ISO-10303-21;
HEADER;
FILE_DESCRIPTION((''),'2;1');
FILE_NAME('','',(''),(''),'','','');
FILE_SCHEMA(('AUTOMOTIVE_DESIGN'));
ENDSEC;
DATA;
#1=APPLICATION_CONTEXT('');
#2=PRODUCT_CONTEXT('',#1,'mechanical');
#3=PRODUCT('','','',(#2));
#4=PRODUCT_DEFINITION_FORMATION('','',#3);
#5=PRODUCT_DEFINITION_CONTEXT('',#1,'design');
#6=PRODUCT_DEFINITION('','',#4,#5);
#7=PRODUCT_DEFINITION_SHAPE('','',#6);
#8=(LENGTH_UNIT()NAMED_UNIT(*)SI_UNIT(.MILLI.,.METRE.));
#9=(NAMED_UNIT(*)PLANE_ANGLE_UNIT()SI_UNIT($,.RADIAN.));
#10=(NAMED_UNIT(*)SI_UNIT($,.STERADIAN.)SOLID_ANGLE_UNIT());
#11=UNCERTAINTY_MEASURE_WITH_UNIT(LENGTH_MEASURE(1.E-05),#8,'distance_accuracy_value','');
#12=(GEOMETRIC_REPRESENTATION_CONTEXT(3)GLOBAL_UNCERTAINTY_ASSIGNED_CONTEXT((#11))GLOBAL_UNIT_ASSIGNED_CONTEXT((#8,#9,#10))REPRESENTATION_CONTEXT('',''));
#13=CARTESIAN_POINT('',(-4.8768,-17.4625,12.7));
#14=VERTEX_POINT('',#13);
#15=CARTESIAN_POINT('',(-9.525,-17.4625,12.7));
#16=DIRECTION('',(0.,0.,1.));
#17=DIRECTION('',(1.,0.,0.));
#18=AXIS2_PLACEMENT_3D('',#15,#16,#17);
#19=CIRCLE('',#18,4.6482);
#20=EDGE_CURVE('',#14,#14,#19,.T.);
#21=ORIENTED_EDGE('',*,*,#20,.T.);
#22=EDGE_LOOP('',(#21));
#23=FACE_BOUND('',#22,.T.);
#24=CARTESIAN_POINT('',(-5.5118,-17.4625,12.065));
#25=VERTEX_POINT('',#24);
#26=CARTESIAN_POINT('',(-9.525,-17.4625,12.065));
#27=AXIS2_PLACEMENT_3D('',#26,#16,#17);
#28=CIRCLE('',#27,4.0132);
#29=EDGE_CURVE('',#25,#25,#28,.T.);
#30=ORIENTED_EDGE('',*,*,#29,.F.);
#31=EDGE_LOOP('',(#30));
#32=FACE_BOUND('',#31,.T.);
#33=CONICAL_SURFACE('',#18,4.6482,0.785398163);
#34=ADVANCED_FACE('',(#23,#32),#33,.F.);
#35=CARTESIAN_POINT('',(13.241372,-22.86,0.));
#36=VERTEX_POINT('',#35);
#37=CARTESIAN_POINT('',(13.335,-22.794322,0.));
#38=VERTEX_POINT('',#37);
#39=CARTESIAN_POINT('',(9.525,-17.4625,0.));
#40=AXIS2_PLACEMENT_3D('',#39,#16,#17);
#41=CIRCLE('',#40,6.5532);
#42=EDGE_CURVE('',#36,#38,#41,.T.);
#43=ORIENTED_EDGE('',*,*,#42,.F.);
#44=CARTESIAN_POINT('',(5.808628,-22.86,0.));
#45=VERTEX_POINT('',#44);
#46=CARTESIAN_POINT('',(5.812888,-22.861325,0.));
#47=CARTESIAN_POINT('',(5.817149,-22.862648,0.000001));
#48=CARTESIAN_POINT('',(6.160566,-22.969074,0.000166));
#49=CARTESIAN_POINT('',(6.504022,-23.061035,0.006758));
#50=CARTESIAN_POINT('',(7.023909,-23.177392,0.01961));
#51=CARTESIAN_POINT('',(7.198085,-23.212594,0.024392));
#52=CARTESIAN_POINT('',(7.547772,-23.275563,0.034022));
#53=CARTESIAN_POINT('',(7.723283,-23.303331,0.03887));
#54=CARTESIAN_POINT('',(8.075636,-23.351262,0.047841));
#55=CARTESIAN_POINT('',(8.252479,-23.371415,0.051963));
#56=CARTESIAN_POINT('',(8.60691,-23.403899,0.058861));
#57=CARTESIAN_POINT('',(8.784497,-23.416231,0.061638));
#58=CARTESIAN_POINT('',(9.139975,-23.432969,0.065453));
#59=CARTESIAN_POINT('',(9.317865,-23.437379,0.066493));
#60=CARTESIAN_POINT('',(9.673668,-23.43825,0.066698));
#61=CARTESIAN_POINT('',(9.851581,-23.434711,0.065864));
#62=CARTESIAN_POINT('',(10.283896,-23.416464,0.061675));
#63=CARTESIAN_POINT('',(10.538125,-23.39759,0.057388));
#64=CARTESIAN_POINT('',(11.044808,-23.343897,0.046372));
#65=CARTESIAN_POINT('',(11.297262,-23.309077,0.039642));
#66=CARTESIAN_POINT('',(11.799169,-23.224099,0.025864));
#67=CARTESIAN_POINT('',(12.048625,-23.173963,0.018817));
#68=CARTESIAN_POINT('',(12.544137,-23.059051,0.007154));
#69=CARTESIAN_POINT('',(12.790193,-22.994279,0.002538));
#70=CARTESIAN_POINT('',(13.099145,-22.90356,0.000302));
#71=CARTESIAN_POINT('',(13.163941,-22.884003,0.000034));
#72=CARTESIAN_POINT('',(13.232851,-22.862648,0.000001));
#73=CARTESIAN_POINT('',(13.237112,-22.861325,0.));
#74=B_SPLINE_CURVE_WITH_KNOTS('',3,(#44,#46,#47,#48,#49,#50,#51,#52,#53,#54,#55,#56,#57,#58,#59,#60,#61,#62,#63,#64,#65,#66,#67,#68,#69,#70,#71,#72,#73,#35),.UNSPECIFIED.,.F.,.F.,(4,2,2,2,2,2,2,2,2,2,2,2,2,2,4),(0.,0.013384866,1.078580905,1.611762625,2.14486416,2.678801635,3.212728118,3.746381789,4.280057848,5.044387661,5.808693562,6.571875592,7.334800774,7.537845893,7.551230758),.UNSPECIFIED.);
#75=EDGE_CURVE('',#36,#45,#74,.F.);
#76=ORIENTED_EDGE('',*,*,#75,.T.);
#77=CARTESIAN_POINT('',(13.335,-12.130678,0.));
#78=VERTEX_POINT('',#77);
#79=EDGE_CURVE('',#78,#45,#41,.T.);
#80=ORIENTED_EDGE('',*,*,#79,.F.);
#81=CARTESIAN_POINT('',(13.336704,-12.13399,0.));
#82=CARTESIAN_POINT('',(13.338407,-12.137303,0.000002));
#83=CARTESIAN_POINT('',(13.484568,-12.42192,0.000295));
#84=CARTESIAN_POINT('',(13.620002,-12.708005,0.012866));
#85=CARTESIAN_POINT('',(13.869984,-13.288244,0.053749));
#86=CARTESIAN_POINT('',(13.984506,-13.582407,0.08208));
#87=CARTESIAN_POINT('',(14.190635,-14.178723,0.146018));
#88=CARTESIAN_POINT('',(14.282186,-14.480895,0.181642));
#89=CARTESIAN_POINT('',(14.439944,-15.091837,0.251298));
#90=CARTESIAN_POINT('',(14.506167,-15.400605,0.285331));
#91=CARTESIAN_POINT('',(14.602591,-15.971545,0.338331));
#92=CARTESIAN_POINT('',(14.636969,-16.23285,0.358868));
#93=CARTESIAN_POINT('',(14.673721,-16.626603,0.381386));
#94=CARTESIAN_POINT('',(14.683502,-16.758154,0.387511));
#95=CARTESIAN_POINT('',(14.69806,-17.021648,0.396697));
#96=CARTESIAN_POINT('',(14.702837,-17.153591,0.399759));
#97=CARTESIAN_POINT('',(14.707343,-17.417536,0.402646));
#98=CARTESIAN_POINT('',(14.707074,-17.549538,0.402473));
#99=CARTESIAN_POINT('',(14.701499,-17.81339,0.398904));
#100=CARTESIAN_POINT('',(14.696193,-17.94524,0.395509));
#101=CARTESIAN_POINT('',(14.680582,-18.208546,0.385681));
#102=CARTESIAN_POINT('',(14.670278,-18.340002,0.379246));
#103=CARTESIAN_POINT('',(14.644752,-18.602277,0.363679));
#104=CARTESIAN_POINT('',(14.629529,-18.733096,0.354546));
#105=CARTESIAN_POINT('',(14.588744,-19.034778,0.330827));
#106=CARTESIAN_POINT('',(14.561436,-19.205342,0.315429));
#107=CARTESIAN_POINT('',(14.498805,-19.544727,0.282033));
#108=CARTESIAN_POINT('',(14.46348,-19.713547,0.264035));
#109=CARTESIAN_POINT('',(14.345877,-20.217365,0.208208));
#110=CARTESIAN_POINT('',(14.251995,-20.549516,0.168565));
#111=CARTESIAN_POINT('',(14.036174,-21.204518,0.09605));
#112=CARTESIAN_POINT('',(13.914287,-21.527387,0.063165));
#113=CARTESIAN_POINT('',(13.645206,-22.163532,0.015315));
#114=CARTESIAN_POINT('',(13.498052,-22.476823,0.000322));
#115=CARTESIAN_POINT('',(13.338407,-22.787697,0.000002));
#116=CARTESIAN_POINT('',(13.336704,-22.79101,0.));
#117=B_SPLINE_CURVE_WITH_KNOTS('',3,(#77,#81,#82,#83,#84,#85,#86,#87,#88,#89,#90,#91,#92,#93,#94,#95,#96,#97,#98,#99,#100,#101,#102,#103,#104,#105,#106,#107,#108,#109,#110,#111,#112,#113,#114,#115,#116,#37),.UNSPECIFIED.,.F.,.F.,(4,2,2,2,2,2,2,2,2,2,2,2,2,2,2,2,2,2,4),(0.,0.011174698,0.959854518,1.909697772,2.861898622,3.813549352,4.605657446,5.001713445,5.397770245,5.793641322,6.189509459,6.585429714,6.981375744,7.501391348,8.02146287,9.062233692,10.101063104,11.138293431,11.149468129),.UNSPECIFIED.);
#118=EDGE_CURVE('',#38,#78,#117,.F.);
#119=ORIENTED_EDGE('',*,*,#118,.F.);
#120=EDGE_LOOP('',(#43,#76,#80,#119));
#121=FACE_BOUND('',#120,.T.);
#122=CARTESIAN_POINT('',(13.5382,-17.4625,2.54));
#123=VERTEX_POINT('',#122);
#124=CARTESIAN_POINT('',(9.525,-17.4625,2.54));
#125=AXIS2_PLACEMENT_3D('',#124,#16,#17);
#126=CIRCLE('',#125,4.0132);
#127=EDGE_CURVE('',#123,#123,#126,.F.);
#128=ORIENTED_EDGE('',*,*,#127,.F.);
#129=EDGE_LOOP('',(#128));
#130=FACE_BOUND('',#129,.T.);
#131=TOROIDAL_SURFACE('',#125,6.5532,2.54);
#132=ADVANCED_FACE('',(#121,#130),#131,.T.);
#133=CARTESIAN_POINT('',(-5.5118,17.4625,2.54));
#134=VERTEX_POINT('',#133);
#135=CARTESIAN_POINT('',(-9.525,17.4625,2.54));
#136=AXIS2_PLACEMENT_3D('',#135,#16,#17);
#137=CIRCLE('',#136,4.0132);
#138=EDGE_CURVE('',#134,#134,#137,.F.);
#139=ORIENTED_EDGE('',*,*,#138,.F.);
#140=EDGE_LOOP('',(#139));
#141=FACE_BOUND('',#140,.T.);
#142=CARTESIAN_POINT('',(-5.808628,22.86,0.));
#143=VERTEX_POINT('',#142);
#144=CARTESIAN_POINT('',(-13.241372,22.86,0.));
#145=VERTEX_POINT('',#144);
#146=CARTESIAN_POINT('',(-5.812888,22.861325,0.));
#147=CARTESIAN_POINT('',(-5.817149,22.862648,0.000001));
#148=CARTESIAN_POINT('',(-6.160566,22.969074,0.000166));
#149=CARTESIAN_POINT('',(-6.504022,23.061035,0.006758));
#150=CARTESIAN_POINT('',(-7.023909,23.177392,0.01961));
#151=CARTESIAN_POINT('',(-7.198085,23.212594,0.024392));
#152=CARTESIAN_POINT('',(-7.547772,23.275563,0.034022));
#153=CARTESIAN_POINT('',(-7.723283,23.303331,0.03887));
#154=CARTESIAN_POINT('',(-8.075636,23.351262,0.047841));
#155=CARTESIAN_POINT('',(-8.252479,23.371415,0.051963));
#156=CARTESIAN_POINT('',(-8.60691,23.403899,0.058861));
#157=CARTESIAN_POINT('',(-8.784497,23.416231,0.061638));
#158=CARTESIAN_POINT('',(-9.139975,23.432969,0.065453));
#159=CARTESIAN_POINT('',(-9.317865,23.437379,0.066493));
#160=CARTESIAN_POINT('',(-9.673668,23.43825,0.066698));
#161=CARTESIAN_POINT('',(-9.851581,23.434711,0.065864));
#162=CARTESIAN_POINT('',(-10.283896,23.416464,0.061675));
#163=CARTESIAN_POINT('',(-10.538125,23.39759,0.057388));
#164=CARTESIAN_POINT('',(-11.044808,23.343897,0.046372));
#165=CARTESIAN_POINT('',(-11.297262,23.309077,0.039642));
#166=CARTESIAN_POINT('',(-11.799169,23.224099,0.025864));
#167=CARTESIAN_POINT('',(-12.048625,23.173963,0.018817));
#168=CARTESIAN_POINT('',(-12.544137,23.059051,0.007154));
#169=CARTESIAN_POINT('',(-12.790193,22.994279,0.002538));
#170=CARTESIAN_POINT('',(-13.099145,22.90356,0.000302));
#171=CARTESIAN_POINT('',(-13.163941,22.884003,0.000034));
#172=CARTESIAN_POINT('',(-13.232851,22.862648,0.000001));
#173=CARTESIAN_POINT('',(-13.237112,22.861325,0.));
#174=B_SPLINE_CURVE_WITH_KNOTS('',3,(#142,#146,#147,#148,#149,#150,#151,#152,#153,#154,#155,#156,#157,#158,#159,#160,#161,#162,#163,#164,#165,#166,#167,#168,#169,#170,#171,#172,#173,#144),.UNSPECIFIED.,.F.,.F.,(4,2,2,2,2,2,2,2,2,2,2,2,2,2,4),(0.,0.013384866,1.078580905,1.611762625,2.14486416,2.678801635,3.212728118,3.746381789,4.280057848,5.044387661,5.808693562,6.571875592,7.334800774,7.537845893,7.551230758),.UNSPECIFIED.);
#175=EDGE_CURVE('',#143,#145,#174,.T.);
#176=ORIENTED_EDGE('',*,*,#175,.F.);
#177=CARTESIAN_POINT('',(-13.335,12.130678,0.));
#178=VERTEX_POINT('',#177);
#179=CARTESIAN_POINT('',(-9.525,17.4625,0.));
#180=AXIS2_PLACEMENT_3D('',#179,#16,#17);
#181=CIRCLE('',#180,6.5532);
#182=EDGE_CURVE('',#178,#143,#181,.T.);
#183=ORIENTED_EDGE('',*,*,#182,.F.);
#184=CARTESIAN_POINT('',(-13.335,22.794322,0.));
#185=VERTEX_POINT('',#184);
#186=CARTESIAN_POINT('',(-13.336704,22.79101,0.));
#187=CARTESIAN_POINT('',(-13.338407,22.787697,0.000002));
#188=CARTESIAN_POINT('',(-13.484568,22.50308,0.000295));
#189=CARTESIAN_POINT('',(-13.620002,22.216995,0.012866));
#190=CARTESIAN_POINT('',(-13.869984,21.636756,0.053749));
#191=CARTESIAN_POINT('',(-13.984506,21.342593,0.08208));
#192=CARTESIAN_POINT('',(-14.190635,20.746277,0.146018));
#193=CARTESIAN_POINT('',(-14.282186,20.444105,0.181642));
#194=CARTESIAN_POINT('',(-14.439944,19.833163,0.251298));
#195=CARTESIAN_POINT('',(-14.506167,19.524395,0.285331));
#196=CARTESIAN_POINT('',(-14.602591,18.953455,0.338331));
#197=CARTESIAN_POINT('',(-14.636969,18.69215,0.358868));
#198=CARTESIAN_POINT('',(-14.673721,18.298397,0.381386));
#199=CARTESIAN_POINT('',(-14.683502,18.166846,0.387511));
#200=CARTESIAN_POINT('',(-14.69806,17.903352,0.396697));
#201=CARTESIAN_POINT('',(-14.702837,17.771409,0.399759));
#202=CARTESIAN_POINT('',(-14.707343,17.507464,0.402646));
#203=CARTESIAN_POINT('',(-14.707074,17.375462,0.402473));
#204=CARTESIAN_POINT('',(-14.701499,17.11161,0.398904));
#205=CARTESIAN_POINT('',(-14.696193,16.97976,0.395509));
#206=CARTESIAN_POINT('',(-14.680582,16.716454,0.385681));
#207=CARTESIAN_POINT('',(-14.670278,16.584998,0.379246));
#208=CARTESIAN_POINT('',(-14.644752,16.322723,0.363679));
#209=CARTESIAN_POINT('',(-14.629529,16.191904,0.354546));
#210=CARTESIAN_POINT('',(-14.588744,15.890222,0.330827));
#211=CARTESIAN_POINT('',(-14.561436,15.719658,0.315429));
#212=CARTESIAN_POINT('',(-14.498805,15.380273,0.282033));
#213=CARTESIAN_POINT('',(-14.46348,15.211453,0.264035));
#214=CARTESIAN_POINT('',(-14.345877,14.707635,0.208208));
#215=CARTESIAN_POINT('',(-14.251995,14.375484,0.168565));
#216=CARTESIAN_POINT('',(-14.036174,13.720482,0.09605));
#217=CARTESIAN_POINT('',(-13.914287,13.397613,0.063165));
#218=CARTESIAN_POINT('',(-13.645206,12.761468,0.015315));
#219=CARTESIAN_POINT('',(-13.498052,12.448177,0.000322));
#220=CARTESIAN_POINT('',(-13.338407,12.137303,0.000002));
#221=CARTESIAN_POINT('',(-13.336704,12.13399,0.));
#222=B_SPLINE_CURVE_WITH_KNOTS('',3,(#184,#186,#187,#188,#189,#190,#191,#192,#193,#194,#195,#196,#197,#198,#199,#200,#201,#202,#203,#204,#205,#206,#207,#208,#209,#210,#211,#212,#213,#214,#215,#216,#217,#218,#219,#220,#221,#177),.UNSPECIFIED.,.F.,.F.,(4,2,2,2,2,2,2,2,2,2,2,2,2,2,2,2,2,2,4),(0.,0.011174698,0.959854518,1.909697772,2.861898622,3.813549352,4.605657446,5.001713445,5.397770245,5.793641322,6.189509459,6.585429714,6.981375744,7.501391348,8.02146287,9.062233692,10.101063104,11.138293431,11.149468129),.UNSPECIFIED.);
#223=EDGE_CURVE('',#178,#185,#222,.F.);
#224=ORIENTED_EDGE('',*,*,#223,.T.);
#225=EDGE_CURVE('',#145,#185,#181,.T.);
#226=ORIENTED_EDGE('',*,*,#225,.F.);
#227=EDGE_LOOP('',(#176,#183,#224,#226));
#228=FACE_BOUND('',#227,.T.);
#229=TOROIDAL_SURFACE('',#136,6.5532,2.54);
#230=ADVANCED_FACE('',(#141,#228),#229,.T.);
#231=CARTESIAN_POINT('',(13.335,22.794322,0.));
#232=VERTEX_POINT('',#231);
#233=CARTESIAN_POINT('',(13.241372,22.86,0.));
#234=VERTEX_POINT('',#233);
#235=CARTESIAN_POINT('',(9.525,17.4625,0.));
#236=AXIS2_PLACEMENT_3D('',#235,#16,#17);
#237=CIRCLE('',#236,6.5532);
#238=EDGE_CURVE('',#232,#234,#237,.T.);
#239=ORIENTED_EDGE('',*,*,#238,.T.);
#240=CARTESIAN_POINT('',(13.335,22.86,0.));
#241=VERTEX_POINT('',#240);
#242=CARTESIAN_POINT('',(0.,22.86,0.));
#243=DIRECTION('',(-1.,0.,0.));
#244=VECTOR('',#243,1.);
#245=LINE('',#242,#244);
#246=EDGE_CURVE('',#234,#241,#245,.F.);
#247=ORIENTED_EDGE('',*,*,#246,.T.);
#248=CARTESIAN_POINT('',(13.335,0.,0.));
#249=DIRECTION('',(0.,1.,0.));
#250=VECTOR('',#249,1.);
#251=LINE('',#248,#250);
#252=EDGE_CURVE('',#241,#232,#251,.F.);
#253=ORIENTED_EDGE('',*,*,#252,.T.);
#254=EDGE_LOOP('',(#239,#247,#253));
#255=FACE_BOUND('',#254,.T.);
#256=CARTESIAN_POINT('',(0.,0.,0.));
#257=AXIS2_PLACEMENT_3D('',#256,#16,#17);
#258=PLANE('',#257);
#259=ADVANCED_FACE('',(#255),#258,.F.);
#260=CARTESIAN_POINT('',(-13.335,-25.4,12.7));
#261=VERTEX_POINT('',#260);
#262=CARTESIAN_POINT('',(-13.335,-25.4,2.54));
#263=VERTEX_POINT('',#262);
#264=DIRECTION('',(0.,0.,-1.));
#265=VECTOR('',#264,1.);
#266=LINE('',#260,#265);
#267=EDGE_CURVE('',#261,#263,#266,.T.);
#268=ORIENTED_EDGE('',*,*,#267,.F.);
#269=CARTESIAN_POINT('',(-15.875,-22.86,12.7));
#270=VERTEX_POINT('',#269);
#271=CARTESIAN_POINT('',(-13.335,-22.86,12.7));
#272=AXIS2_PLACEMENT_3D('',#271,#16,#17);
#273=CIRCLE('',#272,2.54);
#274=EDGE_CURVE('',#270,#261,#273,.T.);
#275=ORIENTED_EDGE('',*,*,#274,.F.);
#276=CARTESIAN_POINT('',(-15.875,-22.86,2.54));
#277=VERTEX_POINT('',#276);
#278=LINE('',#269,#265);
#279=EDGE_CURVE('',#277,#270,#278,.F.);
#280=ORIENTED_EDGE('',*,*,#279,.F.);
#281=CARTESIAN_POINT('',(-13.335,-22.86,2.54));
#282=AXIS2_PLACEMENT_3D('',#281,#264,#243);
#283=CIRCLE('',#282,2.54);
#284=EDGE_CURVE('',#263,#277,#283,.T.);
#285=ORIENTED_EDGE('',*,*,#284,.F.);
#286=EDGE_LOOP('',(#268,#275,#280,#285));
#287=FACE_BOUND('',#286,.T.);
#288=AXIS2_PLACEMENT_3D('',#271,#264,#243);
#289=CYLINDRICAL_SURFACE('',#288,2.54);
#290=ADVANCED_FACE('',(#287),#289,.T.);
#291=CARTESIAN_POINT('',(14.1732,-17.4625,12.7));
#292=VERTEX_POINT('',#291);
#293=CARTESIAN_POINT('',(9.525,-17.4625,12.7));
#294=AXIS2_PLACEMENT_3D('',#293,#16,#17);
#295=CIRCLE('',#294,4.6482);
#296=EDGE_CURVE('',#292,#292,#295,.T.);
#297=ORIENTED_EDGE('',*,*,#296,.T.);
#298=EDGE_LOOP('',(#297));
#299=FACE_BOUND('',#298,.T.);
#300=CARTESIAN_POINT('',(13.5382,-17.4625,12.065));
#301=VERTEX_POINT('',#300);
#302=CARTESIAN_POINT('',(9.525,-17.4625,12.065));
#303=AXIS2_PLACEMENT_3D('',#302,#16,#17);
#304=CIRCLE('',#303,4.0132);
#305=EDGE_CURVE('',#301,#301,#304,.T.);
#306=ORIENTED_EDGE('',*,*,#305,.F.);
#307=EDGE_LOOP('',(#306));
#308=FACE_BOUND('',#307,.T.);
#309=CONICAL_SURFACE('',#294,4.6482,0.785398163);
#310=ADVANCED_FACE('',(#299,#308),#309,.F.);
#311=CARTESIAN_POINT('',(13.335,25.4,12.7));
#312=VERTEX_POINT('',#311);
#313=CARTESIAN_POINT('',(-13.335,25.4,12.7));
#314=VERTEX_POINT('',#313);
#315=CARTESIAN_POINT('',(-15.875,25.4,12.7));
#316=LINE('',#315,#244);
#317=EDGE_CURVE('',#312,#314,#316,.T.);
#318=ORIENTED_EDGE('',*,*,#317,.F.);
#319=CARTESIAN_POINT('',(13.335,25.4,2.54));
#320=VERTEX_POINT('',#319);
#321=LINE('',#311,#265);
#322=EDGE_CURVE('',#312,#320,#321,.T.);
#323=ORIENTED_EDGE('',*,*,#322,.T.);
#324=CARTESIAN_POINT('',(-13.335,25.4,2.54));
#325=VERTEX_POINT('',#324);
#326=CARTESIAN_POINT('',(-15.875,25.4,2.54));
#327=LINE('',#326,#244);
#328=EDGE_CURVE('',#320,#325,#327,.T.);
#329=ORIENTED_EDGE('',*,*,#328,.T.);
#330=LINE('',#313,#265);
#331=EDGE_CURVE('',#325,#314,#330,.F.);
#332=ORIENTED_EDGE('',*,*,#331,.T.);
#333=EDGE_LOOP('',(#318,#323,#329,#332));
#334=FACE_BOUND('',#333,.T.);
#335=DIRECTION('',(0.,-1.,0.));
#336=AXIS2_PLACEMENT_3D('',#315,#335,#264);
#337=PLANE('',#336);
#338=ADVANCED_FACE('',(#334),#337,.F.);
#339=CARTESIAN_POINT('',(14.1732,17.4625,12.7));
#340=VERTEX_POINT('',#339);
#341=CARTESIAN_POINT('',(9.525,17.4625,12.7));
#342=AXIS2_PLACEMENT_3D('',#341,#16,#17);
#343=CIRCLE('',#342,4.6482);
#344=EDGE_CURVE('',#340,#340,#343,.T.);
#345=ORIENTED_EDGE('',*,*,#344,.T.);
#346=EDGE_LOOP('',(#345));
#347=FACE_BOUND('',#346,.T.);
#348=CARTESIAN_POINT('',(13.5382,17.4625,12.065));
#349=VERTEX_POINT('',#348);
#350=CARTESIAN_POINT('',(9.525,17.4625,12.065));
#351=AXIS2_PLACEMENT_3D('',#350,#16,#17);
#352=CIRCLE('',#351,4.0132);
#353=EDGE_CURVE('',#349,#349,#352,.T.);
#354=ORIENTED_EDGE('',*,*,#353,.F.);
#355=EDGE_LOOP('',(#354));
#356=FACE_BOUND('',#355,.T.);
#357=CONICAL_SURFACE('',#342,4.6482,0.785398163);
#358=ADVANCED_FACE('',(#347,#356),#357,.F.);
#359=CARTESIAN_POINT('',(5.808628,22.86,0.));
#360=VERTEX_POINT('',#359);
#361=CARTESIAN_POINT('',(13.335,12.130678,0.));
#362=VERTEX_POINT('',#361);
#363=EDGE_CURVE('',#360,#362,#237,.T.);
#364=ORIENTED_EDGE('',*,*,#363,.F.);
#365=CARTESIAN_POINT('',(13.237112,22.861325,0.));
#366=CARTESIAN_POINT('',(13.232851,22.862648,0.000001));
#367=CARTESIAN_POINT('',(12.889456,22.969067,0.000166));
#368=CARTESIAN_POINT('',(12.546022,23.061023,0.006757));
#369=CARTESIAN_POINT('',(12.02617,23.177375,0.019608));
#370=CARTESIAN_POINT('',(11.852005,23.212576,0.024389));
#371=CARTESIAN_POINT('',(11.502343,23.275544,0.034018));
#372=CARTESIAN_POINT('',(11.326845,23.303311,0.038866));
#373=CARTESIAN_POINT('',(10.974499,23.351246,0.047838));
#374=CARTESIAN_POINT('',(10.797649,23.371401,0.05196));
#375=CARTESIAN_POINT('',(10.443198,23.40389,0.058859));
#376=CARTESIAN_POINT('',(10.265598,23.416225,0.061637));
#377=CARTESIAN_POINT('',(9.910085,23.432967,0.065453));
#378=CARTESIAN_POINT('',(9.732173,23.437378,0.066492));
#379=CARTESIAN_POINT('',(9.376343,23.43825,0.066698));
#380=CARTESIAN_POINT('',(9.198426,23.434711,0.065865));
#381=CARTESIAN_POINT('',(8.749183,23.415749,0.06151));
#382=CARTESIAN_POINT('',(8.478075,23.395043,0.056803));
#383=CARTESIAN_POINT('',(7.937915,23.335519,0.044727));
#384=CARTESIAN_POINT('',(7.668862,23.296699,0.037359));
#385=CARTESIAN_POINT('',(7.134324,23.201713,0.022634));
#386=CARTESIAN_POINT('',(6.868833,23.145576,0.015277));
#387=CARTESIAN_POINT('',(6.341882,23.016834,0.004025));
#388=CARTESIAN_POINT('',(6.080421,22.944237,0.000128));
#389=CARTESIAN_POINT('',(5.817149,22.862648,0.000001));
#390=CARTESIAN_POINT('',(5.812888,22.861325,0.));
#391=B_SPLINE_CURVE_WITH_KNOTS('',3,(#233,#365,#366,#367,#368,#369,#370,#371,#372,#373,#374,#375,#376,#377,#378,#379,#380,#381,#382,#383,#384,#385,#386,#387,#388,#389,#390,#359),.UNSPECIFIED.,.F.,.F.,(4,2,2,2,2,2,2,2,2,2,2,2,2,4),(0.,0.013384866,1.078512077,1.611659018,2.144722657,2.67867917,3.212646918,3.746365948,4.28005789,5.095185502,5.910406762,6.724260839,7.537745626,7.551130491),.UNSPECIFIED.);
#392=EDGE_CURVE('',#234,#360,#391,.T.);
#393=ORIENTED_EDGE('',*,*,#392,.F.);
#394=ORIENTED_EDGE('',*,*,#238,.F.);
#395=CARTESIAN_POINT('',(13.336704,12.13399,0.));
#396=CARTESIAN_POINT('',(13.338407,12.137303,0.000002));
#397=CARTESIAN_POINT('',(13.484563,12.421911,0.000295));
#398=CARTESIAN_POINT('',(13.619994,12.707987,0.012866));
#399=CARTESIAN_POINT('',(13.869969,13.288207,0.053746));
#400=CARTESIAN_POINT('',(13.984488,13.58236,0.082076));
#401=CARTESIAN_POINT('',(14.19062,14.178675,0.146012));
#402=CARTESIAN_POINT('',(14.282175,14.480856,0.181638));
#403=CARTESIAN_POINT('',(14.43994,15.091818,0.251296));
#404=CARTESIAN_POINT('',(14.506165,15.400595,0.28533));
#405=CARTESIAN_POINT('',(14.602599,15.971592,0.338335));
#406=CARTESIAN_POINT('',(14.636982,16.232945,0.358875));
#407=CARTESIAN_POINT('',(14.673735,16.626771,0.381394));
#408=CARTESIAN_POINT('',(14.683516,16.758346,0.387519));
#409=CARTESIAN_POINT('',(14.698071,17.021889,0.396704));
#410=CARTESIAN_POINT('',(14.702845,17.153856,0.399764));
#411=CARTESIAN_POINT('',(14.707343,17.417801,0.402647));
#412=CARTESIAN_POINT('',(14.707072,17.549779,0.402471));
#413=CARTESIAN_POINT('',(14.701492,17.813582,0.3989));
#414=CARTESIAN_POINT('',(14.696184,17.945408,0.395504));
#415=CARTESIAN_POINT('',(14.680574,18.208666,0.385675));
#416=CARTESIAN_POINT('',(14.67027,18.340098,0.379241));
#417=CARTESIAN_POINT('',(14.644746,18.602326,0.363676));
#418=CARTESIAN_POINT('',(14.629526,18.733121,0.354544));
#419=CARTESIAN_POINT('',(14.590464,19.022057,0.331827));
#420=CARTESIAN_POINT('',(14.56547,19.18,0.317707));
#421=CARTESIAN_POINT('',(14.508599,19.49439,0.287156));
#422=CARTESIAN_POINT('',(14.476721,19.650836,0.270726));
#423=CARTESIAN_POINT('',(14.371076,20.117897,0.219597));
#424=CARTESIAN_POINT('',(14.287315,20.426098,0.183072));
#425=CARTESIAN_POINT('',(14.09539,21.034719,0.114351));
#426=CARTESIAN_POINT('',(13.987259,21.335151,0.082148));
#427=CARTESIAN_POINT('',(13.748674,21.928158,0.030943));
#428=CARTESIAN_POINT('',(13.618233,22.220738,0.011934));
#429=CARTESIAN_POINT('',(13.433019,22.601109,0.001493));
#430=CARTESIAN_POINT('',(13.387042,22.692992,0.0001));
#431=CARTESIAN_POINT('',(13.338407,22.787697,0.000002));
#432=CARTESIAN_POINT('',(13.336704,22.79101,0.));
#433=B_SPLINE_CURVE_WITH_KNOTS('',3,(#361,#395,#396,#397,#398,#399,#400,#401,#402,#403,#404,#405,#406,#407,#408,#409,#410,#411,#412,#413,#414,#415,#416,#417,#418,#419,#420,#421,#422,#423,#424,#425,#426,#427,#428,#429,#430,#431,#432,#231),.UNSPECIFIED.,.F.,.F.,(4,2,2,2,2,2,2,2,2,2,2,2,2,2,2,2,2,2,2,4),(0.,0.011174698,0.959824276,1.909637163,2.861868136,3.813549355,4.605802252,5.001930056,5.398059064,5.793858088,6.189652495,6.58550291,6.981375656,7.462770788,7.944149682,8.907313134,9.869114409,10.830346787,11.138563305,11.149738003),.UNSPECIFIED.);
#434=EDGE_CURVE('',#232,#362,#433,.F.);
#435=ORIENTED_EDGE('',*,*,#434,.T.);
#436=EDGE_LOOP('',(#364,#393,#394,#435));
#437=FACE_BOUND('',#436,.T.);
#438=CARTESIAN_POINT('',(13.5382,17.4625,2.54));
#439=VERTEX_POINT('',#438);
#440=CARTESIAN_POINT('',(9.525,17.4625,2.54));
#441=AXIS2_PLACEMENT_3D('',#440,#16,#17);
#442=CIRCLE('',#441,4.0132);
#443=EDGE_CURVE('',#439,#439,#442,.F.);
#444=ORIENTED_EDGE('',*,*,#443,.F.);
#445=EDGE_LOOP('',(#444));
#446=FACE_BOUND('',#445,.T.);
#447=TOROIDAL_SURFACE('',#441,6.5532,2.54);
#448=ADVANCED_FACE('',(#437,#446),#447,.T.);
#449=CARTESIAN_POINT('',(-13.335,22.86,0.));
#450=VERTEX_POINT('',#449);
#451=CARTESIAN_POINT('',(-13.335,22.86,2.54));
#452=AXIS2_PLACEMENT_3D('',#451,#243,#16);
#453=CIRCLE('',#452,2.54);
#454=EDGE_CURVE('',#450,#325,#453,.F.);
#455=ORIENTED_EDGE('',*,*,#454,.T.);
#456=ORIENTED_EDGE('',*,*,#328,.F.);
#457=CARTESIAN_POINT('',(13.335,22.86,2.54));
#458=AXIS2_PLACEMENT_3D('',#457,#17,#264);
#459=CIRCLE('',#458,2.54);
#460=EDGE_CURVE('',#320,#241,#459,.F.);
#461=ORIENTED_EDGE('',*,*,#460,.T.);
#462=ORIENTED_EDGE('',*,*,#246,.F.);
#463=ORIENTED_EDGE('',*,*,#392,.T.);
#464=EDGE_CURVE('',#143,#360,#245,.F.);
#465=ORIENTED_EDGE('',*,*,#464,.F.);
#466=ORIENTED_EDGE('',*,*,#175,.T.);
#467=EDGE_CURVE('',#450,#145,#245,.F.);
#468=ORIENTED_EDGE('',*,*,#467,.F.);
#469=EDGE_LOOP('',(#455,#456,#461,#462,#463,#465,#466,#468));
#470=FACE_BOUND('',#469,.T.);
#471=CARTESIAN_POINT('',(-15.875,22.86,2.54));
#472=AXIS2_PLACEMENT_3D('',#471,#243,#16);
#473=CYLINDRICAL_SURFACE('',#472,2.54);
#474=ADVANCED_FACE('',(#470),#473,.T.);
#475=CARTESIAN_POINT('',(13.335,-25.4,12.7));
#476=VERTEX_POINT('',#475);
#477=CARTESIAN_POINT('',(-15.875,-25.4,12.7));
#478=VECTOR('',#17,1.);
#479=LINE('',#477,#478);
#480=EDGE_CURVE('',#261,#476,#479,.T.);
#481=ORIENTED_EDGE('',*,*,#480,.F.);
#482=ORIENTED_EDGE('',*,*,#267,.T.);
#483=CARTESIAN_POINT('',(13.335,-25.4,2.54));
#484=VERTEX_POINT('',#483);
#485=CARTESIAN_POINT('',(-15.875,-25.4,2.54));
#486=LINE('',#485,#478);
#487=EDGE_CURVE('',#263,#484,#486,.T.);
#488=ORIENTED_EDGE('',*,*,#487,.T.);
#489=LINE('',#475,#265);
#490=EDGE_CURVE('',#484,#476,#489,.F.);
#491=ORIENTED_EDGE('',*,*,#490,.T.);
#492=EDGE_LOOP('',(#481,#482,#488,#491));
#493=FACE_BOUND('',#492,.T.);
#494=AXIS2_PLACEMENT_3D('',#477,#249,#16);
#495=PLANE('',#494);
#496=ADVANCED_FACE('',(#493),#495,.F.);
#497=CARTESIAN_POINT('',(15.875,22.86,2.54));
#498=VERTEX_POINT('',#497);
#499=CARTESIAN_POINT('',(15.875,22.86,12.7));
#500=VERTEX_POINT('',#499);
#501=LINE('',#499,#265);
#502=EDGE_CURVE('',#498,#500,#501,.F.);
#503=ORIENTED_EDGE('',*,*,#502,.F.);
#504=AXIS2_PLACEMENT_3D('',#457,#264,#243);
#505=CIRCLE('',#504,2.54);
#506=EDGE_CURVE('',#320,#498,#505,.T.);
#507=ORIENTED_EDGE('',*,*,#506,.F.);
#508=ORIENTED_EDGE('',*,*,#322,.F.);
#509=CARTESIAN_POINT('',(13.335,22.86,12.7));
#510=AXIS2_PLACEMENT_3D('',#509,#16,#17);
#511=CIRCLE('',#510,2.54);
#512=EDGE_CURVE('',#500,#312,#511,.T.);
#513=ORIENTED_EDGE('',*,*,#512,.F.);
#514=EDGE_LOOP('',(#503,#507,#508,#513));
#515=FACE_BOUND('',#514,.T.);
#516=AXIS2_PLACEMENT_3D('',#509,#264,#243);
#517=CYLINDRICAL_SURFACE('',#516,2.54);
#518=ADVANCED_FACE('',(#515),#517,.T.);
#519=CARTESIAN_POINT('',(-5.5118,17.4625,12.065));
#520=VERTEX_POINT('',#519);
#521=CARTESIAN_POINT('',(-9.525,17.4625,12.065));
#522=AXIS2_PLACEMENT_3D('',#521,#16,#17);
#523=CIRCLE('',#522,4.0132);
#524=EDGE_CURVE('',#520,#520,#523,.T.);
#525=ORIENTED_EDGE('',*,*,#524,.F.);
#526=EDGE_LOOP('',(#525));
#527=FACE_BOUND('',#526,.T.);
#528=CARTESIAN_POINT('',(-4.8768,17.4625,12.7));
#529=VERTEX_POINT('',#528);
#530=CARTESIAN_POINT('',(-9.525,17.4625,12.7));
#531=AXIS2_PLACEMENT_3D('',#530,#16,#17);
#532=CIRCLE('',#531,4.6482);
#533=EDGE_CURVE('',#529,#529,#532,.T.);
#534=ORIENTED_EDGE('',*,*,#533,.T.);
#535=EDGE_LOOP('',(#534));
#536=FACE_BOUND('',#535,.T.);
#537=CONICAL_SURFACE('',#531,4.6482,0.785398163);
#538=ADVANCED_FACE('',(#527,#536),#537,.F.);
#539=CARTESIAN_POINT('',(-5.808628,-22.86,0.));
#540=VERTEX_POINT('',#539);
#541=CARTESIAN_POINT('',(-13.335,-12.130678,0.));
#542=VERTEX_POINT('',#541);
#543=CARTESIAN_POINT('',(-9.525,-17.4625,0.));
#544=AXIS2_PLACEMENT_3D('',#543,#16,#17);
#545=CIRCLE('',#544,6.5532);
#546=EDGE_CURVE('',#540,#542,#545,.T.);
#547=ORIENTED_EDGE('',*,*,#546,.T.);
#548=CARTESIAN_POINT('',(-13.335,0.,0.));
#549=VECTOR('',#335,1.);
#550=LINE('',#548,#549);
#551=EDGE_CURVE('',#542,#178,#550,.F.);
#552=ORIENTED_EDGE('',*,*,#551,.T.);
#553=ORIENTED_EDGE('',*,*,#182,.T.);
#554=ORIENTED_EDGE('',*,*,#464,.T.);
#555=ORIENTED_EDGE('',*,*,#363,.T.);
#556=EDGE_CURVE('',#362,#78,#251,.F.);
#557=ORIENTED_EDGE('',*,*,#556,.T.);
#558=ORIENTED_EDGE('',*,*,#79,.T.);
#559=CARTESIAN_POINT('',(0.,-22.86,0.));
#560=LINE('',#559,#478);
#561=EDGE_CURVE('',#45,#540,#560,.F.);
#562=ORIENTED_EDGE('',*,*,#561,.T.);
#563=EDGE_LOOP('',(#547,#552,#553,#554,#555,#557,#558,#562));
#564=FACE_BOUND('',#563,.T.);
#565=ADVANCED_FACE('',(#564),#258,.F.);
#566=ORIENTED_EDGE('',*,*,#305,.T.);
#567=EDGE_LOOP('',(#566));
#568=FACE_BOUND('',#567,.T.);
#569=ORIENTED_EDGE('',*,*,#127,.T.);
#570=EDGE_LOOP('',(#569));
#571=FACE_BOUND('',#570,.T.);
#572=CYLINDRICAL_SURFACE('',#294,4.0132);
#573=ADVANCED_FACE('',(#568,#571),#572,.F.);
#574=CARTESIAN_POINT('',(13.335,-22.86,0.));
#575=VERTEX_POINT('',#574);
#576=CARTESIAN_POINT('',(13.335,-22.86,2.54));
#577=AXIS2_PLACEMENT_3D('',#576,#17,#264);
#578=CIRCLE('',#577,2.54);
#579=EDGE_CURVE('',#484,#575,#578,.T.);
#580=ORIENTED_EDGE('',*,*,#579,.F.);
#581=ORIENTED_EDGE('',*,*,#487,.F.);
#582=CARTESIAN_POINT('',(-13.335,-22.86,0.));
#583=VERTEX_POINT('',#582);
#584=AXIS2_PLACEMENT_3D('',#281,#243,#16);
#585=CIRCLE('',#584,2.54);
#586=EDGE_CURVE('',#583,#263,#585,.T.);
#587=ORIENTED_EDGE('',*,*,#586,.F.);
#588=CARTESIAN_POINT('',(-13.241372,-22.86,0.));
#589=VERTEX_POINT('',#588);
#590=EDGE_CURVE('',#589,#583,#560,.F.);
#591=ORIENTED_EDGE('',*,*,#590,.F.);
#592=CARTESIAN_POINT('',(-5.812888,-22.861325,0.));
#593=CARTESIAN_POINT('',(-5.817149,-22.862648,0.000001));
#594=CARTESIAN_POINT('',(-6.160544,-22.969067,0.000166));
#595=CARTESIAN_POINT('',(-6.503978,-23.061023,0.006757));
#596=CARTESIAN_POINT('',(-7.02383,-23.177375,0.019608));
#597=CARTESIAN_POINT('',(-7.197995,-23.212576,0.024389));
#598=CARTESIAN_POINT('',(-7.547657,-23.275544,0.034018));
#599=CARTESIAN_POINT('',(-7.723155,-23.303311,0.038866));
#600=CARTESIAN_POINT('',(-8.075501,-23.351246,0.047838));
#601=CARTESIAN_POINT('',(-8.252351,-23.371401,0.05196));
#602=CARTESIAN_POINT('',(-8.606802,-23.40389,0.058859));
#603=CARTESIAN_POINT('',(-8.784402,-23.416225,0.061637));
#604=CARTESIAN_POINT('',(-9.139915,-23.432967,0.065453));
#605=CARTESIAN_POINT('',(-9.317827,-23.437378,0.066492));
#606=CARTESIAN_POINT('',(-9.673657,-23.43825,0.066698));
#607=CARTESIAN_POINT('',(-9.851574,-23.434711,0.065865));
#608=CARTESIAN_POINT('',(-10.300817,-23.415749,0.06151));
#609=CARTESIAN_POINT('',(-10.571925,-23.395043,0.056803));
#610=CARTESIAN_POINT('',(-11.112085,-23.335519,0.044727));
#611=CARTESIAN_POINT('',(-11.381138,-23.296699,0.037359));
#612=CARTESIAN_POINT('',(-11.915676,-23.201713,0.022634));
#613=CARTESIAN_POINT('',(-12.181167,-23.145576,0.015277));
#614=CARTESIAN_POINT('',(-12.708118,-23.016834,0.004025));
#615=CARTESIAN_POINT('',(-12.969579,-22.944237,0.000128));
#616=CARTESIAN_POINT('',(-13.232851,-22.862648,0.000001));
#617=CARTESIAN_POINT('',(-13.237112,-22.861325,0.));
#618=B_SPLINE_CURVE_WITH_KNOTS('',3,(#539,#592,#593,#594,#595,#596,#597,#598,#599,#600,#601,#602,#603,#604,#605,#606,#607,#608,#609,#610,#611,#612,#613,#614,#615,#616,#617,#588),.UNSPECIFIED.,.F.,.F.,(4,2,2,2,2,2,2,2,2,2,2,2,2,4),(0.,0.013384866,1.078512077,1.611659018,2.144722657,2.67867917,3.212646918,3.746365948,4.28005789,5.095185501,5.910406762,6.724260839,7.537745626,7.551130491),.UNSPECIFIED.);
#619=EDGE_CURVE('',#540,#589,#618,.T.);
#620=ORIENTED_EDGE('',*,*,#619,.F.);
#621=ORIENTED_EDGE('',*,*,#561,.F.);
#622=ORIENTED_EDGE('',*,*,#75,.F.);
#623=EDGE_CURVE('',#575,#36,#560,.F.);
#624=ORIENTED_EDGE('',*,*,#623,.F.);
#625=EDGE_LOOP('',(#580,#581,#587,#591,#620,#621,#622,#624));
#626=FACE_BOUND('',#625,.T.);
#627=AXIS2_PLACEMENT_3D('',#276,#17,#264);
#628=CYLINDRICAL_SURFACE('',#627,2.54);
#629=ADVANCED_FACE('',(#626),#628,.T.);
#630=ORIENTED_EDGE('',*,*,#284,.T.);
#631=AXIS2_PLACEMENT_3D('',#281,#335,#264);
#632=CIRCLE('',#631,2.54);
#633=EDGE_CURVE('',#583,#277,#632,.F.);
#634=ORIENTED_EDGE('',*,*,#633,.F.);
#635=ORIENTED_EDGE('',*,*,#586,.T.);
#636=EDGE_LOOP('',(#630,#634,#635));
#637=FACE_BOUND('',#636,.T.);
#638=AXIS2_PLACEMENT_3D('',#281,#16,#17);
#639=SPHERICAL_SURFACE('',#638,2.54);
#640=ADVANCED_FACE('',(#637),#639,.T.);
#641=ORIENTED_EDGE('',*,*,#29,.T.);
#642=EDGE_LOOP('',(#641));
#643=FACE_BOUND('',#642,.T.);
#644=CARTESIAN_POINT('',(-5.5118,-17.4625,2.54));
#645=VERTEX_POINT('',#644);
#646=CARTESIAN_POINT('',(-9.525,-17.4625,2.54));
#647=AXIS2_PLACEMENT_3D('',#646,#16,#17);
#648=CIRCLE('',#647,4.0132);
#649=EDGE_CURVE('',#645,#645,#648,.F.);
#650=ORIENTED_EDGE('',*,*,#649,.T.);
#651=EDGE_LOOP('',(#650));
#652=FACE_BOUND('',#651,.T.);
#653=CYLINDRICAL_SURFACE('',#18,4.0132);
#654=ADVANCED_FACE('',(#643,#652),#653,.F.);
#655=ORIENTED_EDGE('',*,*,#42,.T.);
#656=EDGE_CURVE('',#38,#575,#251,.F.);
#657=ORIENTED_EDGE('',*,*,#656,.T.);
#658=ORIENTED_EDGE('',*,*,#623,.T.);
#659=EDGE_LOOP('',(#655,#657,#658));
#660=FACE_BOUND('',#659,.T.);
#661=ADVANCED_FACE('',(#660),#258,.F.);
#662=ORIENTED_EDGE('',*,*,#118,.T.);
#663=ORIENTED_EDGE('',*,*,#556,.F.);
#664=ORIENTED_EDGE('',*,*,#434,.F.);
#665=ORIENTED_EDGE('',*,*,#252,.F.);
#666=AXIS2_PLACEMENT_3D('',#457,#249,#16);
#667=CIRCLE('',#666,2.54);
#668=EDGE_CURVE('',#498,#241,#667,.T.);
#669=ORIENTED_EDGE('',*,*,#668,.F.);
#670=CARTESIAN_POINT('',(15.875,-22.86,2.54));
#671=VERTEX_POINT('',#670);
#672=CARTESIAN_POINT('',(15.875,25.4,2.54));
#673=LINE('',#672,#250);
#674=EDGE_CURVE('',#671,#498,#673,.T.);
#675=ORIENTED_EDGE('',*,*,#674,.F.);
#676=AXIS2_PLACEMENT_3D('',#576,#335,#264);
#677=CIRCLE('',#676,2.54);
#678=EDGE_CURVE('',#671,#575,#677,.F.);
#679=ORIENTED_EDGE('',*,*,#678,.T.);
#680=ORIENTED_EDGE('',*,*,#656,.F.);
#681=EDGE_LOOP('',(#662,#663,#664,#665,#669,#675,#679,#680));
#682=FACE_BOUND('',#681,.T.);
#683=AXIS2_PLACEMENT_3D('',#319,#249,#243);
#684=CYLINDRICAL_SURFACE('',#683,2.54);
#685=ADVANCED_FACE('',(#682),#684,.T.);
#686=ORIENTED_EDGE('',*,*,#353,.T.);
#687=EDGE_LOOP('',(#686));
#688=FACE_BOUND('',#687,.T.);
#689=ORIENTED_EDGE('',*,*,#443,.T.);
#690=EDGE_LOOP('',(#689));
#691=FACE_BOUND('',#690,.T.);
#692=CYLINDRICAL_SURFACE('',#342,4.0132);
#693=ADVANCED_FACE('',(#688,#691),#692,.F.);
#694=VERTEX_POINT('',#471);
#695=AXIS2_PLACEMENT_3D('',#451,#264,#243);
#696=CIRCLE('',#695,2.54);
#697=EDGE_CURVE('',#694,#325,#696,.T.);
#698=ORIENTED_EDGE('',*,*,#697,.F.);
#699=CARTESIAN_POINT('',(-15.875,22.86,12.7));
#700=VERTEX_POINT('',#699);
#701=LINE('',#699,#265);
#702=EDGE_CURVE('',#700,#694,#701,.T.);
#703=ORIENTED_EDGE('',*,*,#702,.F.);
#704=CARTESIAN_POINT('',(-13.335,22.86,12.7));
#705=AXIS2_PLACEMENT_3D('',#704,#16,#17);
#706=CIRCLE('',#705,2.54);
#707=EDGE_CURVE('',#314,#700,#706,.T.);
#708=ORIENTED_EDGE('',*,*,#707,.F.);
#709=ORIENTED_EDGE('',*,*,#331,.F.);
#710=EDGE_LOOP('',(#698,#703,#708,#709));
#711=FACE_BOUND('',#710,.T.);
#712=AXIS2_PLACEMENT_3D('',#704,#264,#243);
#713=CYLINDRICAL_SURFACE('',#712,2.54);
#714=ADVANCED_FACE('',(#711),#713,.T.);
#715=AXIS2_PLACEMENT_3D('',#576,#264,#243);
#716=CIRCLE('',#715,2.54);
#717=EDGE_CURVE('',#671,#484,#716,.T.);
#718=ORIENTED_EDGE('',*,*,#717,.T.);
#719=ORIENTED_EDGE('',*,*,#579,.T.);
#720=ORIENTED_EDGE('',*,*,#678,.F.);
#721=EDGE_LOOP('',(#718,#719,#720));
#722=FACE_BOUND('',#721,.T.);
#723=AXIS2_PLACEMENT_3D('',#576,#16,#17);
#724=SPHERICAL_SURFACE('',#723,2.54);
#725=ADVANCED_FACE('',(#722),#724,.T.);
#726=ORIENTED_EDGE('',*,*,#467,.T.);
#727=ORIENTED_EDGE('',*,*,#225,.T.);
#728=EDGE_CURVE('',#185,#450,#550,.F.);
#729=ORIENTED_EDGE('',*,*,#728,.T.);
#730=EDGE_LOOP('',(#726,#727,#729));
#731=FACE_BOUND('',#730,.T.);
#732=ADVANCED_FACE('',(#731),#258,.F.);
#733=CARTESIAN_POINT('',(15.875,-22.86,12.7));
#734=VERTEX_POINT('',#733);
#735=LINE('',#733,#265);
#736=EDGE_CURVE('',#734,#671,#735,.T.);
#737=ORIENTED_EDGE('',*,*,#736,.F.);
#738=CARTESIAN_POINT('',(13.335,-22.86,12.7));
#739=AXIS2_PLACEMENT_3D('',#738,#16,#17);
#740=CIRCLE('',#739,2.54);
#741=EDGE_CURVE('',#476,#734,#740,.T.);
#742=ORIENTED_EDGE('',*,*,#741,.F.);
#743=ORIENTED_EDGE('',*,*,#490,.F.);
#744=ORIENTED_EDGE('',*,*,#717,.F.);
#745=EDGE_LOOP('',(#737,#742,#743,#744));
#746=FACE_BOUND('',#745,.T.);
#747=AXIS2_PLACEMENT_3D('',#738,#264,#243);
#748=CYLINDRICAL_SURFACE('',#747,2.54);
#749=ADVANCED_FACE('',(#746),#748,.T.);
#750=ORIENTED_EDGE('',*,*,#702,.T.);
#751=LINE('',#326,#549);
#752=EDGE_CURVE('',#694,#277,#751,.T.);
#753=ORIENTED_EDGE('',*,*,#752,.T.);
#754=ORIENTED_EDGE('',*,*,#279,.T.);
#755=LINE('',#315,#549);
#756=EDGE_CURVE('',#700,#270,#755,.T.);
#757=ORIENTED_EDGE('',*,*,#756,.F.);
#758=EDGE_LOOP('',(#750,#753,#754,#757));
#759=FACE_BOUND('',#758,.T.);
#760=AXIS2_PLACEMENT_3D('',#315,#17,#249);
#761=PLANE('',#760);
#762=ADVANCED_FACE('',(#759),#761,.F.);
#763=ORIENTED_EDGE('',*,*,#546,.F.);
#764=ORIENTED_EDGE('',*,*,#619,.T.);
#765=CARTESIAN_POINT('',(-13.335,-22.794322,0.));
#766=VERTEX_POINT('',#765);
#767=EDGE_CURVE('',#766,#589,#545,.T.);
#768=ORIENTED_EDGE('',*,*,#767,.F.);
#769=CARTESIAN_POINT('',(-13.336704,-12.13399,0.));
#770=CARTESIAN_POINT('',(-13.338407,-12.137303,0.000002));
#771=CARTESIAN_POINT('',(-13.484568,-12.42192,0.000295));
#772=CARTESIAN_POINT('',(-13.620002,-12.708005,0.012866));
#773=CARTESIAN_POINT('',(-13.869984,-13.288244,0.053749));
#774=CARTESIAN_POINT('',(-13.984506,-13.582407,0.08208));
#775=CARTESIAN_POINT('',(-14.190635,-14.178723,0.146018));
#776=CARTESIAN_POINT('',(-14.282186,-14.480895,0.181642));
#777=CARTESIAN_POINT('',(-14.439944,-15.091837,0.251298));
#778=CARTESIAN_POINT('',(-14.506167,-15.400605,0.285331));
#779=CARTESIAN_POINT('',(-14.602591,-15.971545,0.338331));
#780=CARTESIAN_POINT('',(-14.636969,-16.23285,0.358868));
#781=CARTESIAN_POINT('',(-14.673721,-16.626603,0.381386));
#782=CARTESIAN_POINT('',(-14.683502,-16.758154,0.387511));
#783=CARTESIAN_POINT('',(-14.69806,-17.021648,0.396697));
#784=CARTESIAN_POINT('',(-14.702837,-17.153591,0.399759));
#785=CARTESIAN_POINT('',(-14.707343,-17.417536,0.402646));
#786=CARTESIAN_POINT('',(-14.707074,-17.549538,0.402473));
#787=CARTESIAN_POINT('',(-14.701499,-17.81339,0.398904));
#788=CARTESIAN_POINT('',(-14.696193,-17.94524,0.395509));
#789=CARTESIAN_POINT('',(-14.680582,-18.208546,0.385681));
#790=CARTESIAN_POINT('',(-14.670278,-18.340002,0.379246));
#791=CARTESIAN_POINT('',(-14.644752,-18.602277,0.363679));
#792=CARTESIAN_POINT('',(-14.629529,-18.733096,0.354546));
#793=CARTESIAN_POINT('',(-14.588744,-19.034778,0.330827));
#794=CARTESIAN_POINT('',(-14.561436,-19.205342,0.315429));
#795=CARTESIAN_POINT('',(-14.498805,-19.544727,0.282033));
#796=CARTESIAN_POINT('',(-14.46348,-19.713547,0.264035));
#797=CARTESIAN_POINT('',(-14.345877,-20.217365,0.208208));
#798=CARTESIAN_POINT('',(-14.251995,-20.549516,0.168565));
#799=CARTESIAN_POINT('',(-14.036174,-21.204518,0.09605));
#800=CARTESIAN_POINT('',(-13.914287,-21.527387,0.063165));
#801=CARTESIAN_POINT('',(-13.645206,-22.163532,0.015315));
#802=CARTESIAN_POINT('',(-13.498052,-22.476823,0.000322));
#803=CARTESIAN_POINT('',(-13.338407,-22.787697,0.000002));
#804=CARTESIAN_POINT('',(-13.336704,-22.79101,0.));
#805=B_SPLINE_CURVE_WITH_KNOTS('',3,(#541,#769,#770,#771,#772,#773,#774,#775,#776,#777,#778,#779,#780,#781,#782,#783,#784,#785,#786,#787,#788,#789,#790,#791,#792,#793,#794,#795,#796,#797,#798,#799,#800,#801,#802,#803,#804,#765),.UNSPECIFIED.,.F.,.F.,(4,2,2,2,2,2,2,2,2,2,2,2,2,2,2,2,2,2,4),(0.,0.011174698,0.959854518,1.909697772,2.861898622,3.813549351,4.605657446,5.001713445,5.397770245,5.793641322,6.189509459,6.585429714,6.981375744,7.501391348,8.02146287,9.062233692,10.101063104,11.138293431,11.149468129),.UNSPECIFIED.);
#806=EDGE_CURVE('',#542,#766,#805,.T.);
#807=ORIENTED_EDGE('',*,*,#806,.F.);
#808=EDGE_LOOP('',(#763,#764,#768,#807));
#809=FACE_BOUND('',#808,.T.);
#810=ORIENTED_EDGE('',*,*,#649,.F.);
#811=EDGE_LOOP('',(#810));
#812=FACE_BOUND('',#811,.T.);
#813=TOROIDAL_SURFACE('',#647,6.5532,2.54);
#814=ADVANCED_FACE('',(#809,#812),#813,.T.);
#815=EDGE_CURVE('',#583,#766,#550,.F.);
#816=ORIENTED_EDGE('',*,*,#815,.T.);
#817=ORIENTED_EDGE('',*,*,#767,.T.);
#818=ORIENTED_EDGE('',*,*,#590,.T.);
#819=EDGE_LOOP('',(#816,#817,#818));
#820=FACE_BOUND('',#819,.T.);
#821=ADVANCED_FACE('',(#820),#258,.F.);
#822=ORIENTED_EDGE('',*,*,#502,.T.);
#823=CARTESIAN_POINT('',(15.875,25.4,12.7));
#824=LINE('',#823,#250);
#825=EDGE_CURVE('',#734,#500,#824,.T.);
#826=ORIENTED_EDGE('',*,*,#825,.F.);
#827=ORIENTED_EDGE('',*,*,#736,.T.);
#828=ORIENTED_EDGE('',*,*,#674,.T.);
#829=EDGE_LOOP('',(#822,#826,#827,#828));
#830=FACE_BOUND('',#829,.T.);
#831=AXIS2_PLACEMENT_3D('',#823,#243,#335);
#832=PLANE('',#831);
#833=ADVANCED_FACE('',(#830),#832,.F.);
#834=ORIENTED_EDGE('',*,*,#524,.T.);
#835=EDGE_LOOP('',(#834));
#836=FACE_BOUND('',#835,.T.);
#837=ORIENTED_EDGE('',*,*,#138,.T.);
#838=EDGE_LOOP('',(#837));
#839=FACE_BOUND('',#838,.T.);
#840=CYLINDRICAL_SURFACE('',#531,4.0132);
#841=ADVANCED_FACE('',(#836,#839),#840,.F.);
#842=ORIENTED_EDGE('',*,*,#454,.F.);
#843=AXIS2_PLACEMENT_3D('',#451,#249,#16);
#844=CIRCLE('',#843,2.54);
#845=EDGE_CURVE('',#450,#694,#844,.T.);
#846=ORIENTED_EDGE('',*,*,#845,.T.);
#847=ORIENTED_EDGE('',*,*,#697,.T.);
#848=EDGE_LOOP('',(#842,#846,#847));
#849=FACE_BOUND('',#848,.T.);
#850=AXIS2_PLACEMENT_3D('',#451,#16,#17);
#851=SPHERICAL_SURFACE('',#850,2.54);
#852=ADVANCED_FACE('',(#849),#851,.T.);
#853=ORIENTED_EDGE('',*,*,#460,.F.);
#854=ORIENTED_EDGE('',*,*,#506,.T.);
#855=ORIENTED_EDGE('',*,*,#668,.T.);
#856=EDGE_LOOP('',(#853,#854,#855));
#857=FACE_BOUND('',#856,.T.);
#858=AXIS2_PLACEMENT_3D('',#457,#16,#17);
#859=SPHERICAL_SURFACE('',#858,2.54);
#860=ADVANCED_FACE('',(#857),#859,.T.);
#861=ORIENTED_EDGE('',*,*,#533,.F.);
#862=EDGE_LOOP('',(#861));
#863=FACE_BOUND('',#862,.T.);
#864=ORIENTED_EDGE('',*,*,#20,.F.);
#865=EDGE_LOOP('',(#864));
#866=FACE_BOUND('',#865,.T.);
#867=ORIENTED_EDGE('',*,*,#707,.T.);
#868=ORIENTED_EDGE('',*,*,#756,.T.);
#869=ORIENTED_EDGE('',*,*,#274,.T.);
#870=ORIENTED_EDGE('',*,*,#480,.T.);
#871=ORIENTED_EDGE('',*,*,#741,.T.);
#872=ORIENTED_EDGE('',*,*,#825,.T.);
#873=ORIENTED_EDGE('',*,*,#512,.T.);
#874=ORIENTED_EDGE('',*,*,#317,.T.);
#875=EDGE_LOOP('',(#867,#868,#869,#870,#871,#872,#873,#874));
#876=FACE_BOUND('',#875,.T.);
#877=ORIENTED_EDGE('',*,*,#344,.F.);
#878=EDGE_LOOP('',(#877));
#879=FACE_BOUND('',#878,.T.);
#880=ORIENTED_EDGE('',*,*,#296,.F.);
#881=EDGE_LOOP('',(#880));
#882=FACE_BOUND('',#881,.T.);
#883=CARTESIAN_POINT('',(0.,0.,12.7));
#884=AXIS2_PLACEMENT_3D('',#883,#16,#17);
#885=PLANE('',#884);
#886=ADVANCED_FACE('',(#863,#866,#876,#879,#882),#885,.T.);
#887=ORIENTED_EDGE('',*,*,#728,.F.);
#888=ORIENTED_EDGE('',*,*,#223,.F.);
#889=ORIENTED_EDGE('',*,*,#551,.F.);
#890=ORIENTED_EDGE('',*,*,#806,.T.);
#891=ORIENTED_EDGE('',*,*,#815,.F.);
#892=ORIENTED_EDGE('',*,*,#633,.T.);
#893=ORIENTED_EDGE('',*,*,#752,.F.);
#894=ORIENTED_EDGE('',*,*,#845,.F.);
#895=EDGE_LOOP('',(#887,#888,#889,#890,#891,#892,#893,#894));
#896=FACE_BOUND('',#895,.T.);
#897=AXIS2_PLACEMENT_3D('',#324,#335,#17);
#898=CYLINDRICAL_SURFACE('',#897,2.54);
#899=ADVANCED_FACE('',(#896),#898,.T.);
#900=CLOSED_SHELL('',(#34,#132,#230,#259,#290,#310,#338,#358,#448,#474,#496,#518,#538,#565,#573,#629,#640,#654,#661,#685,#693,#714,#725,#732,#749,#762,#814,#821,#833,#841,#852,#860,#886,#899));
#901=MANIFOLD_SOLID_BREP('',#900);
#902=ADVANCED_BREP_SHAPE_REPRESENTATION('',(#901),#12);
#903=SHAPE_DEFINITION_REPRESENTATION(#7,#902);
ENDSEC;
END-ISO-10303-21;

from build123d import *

# Parameters (mm, degrees)
SKETCH1_W                          = 31.75
SKETCH1_H                          = 50.8
BOSS_EXTRUDE1_DEPTH                = 12.7
O_0_316_DIAMETER_HOLE1_D           = 8.0264
O_0_316_DIAMETER_HOLE1_CSINK_D     = 9.2964
O_0_316_DIAMETER_HOLE1_CSINK_ANGLE = 90
FILLET1_R                          = 2.54


with BuildPart() as part:
    # Sketch1 → Boss-Extrude1 (new body)
    with BuildSketch(Plane.XY):
        Rectangle(SKETCH1_W, SKETCH1_H)
    extrude(amount=BOSS_EXTRUDE1_DEPTH)

    # O (0.316) Diameter Hole1 (through all)
    with Locations(Plane.XY.offset(12.7)):
        with Locations((-9.525, 17.4625), (9.525, 17.4625), (9.525, -17.4625), (-9.525, -17.4625)):
            CounterSinkHole(O_0_316_DIAMETER_HOLE1_D / 2, O_0_316_DIAMETER_HOLE1_CSINK_D / 2, counter_sink_angle=O_0_316_DIAMETER_HOLE1_CSINK_ANGLE)

    # Fillet1
    # the kernel refuses this fillet: 2.54 mm, written as the material it takes off along each edge
    with BuildSketch(Plane(origin=(13.335, -22.86, 2.54), x_dir=(0, 0, -1), z_dir=(0, -1, 0))) as fillet1_piece_1_section:
        Polygon((0, 0), (FILLET1_R, 0), (FILLET1_R, FILLET1_R), (0, FILLET1_R), align=None)
    fillet1_piece_1 = extrude(amount=FILLET1_R, mode=Mode.PRIVATE)
    fillet1_piece_1 = fillet1_piece_1 - Plane(origin=(13.335, -22.86, 2.54), x_dir=(-0.7071067811865475, 0, 0.7071067811865475), z_dir=(0, -1, 0)) * Sphere(FILLET1_R, mode=Mode.PRIVATE)
    add(fillet1_piece_1, mode=Mode.SUBTRACT)
    with BuildSketch(Plane(origin=(-13.335, -22.86, 2.54), x_dir=(0, 0, -1), z_dir=(0, -1, 0))) as fillet1_piece_2_section:
        Polygon((0, 0), (FILLET1_R, 0), (FILLET1_R, -FILLET1_R), (0, -FILLET1_R), align=None)
    fillet1_piece_2 = extrude(amount=FILLET1_R, mode=Mode.PRIVATE)
    fillet1_piece_2 = fillet1_piece_2 - Plane(origin=(-13.335, -22.86, 2.54), x_dir=(0.7071067811865475, 0, 0.7071067811865475), z_dir=(0, -1, 0)) * Sphere(FILLET1_R, mode=Mode.PRIVATE)
    add(fillet1_piece_2, mode=Mode.SUBTRACT)
    with BuildSketch(Plane(origin=(-13.335, 22.86, 2.54), x_dir=(0, 0, -1), z_dir=(0, 1, 0))) as fillet1_piece_3_section:
        Polygon((0, 0), (FILLET1_R, 0), (FILLET1_R, FILLET1_R), (0, FILLET1_R), align=None)
    fillet1_piece_3 = extrude(amount=FILLET1_R, mode=Mode.PRIVATE)
    fillet1_piece_3 = fillet1_piece_3 - Plane(origin=(-13.335, 22.86, 2.54), x_dir=(0.7071067811865475, 0, 0.7071067811865475), z_dir=(0, 1, 0)) * Sphere(FILLET1_R, mode=Mode.PRIVATE)
    add(fillet1_piece_3, mode=Mode.SUBTRACT)
    with BuildSketch(Plane(origin=(13.335, 22.86, 2.54), x_dir=(0, 0, -1), z_dir=(0, 1, 0))) as fillet1_piece_4_section:
        Polygon((0, 0), (FILLET1_R, 0), (FILLET1_R, -FILLET1_R), (0, -FILLET1_R), align=None)
    fillet1_piece_4 = extrude(amount=FILLET1_R, mode=Mode.PRIVATE)
    fillet1_piece_4 = fillet1_piece_4 - Plane(origin=(13.335, 22.86, 2.54), x_dir=(-0.7071067811865475, 0, 0.7071067811865475), z_dir=(0, 1, 0)) * Sphere(FILLET1_R, mode=Mode.PRIVATE)
    add(fillet1_piece_4, mode=Mode.SUBTRACT)
    with BuildSketch(Plane(origin=(-9.525, -17.4625, 0), x_dir=(-1, 0, 0), z_dir=(0, -1, 0))) as fillet1_piece_5:
        with BuildLine():
            CenterArc((4.0132 + FILLET1_R, -FILLET1_R), FILLET1_R, 90, 90)
            Line((4.0132 + FILLET1_R, 0), (4.0132, 0))
            Line((4.0132, 0), (4.0132, -FILLET1_R))
        make_face()
    revolve(axis=Axis((-9.525, -17.4625, 0), (0, 0, -1)), mode=Mode.SUBTRACT)
    with BuildSketch(Plane(origin=(9.525, -17.4625, 0), x_dir=(-1, 0, 0), z_dir=(0, -1, 0))) as fillet1_piece_6:
        with BuildLine():
            CenterArc((4.0132 + FILLET1_R, -FILLET1_R), FILLET1_R, 90, 90)
            Line((4.0132 + FILLET1_R, 0), (4.0132, 0))
            Line((4.0132, 0), (4.0132, -FILLET1_R))
        make_face()
    revolve(axis=Axis((9.525, -17.4625, 0), (0, 0, -1)), mode=Mode.SUBTRACT)
    with BuildSketch(Plane(origin=(9.525, 17.4625, 0), x_dir=(-1, 0, 0), z_dir=(0, -1, 0))) as fillet1_piece_7:
        with BuildLine():
            CenterArc((4.0132 + FILLET1_R, -FILLET1_R), FILLET1_R, 90, 90)
            Line((4.0132 + FILLET1_R, 0), (4.0132, 0))
            Line((4.0132, 0), (4.0132, -FILLET1_R))
        make_face()
    revolve(axis=Axis((9.525, 17.4625, 0), (0, 0, -1)), mode=Mode.SUBTRACT)
    with BuildSketch(Plane(origin=(-9.525, 17.4625, 0), x_dir=(-1, 0, 0), z_dir=(0, -1, 0))) as fillet1_piece_8:
        with BuildLine():
            CenterArc((4.0132 + FILLET1_R, -FILLET1_R), FILLET1_R, 90, 90)
            Line((4.0132 + FILLET1_R, 0), (4.0132, 0))
            Line((4.0132, 0), (4.0132, -FILLET1_R))
        make_face()
    revolve(axis=Axis((-9.525, 17.4625, 0), (0, 0, -1)), mode=Mode.SUBTRACT)
    with BuildSketch(Plane(origin=(13.335, -25.4, 0), x_dir=(0, 0, 1), z_dir=(-1, 0, 0)), Plane(origin=(-13.335, 25.4, 0), x_dir=(0, 0, 1), z_dir=(1, 0, 0))) as fillet1_piece_9:
        with BuildLine():
            CenterArc((FILLET1_R, FILLET1_R), FILLET1_R, 180, 90)
            Line((0, FILLET1_R), (0, 0))
            Line((0, 0), (FILLET1_R, 0))
        make_face()
    extrude(amount=26.67, mode=Mode.SUBTRACT)
    with BuildSketch(Plane(origin=(-15.875, -22.86, 0), x_dir=(1, 0, 0), z_dir=(0, 1, 0)), Plane(origin=(15.875, 22.86, 0), x_dir=(-1, 0, 0), z_dir=(0, -1, 0))) as fillet1_piece_10:
        with BuildLine():
            CenterArc((FILLET1_R, -FILLET1_R), FILLET1_R, 90, 90)
            Line((0, -FILLET1_R), (0, 0))
            Line((0, 0), (FILLET1_R, 0))
        make_face()
    extrude(amount=45.72, mode=Mode.SUBTRACT)
    with BuildSketch(Plane(origin=(15.875, -25.4, 2.54), x_dir=(-1, 0, 0), z_dir=(0, 0, 1)), Plane(origin=(-15.875, 25.4, 2.54), x_dir=(1, 0, 0), z_dir=(0, 0, 1))) as fillet1_piece_11:
        with BuildLine():
            CenterArc((FILLET1_R, -FILLET1_R), FILLET1_R, 90, 90)
            Line((0, -FILLET1_R), (0, 0))
            Line((0, 0), (FILLET1_R, 0))
        make_face()
    extrude(amount=16.51, mode=Mode.SUBTRACT)
    with BuildSketch(Plane(origin=(-15.875, -25.4, 2.54), x_dir=(1, 0, 0), z_dir=(0, 0, 1)), Plane(origin=(15.875, 25.4, 2.54), x_dir=(-1, 0, 0), z_dir=(0, 0, 1))) as fillet1_piece_12:
        with BuildLine():
            CenterArc((FILLET1_R, FILLET1_R), FILLET1_R, 180, 90)
            Line((0, FILLET1_R), (0, 0))
            Line((0, 0), (FILLET1_R, 0))
        make_face()
    extrude(amount=16.51, mode=Mode.SUBTRACT)


solid = part.part
